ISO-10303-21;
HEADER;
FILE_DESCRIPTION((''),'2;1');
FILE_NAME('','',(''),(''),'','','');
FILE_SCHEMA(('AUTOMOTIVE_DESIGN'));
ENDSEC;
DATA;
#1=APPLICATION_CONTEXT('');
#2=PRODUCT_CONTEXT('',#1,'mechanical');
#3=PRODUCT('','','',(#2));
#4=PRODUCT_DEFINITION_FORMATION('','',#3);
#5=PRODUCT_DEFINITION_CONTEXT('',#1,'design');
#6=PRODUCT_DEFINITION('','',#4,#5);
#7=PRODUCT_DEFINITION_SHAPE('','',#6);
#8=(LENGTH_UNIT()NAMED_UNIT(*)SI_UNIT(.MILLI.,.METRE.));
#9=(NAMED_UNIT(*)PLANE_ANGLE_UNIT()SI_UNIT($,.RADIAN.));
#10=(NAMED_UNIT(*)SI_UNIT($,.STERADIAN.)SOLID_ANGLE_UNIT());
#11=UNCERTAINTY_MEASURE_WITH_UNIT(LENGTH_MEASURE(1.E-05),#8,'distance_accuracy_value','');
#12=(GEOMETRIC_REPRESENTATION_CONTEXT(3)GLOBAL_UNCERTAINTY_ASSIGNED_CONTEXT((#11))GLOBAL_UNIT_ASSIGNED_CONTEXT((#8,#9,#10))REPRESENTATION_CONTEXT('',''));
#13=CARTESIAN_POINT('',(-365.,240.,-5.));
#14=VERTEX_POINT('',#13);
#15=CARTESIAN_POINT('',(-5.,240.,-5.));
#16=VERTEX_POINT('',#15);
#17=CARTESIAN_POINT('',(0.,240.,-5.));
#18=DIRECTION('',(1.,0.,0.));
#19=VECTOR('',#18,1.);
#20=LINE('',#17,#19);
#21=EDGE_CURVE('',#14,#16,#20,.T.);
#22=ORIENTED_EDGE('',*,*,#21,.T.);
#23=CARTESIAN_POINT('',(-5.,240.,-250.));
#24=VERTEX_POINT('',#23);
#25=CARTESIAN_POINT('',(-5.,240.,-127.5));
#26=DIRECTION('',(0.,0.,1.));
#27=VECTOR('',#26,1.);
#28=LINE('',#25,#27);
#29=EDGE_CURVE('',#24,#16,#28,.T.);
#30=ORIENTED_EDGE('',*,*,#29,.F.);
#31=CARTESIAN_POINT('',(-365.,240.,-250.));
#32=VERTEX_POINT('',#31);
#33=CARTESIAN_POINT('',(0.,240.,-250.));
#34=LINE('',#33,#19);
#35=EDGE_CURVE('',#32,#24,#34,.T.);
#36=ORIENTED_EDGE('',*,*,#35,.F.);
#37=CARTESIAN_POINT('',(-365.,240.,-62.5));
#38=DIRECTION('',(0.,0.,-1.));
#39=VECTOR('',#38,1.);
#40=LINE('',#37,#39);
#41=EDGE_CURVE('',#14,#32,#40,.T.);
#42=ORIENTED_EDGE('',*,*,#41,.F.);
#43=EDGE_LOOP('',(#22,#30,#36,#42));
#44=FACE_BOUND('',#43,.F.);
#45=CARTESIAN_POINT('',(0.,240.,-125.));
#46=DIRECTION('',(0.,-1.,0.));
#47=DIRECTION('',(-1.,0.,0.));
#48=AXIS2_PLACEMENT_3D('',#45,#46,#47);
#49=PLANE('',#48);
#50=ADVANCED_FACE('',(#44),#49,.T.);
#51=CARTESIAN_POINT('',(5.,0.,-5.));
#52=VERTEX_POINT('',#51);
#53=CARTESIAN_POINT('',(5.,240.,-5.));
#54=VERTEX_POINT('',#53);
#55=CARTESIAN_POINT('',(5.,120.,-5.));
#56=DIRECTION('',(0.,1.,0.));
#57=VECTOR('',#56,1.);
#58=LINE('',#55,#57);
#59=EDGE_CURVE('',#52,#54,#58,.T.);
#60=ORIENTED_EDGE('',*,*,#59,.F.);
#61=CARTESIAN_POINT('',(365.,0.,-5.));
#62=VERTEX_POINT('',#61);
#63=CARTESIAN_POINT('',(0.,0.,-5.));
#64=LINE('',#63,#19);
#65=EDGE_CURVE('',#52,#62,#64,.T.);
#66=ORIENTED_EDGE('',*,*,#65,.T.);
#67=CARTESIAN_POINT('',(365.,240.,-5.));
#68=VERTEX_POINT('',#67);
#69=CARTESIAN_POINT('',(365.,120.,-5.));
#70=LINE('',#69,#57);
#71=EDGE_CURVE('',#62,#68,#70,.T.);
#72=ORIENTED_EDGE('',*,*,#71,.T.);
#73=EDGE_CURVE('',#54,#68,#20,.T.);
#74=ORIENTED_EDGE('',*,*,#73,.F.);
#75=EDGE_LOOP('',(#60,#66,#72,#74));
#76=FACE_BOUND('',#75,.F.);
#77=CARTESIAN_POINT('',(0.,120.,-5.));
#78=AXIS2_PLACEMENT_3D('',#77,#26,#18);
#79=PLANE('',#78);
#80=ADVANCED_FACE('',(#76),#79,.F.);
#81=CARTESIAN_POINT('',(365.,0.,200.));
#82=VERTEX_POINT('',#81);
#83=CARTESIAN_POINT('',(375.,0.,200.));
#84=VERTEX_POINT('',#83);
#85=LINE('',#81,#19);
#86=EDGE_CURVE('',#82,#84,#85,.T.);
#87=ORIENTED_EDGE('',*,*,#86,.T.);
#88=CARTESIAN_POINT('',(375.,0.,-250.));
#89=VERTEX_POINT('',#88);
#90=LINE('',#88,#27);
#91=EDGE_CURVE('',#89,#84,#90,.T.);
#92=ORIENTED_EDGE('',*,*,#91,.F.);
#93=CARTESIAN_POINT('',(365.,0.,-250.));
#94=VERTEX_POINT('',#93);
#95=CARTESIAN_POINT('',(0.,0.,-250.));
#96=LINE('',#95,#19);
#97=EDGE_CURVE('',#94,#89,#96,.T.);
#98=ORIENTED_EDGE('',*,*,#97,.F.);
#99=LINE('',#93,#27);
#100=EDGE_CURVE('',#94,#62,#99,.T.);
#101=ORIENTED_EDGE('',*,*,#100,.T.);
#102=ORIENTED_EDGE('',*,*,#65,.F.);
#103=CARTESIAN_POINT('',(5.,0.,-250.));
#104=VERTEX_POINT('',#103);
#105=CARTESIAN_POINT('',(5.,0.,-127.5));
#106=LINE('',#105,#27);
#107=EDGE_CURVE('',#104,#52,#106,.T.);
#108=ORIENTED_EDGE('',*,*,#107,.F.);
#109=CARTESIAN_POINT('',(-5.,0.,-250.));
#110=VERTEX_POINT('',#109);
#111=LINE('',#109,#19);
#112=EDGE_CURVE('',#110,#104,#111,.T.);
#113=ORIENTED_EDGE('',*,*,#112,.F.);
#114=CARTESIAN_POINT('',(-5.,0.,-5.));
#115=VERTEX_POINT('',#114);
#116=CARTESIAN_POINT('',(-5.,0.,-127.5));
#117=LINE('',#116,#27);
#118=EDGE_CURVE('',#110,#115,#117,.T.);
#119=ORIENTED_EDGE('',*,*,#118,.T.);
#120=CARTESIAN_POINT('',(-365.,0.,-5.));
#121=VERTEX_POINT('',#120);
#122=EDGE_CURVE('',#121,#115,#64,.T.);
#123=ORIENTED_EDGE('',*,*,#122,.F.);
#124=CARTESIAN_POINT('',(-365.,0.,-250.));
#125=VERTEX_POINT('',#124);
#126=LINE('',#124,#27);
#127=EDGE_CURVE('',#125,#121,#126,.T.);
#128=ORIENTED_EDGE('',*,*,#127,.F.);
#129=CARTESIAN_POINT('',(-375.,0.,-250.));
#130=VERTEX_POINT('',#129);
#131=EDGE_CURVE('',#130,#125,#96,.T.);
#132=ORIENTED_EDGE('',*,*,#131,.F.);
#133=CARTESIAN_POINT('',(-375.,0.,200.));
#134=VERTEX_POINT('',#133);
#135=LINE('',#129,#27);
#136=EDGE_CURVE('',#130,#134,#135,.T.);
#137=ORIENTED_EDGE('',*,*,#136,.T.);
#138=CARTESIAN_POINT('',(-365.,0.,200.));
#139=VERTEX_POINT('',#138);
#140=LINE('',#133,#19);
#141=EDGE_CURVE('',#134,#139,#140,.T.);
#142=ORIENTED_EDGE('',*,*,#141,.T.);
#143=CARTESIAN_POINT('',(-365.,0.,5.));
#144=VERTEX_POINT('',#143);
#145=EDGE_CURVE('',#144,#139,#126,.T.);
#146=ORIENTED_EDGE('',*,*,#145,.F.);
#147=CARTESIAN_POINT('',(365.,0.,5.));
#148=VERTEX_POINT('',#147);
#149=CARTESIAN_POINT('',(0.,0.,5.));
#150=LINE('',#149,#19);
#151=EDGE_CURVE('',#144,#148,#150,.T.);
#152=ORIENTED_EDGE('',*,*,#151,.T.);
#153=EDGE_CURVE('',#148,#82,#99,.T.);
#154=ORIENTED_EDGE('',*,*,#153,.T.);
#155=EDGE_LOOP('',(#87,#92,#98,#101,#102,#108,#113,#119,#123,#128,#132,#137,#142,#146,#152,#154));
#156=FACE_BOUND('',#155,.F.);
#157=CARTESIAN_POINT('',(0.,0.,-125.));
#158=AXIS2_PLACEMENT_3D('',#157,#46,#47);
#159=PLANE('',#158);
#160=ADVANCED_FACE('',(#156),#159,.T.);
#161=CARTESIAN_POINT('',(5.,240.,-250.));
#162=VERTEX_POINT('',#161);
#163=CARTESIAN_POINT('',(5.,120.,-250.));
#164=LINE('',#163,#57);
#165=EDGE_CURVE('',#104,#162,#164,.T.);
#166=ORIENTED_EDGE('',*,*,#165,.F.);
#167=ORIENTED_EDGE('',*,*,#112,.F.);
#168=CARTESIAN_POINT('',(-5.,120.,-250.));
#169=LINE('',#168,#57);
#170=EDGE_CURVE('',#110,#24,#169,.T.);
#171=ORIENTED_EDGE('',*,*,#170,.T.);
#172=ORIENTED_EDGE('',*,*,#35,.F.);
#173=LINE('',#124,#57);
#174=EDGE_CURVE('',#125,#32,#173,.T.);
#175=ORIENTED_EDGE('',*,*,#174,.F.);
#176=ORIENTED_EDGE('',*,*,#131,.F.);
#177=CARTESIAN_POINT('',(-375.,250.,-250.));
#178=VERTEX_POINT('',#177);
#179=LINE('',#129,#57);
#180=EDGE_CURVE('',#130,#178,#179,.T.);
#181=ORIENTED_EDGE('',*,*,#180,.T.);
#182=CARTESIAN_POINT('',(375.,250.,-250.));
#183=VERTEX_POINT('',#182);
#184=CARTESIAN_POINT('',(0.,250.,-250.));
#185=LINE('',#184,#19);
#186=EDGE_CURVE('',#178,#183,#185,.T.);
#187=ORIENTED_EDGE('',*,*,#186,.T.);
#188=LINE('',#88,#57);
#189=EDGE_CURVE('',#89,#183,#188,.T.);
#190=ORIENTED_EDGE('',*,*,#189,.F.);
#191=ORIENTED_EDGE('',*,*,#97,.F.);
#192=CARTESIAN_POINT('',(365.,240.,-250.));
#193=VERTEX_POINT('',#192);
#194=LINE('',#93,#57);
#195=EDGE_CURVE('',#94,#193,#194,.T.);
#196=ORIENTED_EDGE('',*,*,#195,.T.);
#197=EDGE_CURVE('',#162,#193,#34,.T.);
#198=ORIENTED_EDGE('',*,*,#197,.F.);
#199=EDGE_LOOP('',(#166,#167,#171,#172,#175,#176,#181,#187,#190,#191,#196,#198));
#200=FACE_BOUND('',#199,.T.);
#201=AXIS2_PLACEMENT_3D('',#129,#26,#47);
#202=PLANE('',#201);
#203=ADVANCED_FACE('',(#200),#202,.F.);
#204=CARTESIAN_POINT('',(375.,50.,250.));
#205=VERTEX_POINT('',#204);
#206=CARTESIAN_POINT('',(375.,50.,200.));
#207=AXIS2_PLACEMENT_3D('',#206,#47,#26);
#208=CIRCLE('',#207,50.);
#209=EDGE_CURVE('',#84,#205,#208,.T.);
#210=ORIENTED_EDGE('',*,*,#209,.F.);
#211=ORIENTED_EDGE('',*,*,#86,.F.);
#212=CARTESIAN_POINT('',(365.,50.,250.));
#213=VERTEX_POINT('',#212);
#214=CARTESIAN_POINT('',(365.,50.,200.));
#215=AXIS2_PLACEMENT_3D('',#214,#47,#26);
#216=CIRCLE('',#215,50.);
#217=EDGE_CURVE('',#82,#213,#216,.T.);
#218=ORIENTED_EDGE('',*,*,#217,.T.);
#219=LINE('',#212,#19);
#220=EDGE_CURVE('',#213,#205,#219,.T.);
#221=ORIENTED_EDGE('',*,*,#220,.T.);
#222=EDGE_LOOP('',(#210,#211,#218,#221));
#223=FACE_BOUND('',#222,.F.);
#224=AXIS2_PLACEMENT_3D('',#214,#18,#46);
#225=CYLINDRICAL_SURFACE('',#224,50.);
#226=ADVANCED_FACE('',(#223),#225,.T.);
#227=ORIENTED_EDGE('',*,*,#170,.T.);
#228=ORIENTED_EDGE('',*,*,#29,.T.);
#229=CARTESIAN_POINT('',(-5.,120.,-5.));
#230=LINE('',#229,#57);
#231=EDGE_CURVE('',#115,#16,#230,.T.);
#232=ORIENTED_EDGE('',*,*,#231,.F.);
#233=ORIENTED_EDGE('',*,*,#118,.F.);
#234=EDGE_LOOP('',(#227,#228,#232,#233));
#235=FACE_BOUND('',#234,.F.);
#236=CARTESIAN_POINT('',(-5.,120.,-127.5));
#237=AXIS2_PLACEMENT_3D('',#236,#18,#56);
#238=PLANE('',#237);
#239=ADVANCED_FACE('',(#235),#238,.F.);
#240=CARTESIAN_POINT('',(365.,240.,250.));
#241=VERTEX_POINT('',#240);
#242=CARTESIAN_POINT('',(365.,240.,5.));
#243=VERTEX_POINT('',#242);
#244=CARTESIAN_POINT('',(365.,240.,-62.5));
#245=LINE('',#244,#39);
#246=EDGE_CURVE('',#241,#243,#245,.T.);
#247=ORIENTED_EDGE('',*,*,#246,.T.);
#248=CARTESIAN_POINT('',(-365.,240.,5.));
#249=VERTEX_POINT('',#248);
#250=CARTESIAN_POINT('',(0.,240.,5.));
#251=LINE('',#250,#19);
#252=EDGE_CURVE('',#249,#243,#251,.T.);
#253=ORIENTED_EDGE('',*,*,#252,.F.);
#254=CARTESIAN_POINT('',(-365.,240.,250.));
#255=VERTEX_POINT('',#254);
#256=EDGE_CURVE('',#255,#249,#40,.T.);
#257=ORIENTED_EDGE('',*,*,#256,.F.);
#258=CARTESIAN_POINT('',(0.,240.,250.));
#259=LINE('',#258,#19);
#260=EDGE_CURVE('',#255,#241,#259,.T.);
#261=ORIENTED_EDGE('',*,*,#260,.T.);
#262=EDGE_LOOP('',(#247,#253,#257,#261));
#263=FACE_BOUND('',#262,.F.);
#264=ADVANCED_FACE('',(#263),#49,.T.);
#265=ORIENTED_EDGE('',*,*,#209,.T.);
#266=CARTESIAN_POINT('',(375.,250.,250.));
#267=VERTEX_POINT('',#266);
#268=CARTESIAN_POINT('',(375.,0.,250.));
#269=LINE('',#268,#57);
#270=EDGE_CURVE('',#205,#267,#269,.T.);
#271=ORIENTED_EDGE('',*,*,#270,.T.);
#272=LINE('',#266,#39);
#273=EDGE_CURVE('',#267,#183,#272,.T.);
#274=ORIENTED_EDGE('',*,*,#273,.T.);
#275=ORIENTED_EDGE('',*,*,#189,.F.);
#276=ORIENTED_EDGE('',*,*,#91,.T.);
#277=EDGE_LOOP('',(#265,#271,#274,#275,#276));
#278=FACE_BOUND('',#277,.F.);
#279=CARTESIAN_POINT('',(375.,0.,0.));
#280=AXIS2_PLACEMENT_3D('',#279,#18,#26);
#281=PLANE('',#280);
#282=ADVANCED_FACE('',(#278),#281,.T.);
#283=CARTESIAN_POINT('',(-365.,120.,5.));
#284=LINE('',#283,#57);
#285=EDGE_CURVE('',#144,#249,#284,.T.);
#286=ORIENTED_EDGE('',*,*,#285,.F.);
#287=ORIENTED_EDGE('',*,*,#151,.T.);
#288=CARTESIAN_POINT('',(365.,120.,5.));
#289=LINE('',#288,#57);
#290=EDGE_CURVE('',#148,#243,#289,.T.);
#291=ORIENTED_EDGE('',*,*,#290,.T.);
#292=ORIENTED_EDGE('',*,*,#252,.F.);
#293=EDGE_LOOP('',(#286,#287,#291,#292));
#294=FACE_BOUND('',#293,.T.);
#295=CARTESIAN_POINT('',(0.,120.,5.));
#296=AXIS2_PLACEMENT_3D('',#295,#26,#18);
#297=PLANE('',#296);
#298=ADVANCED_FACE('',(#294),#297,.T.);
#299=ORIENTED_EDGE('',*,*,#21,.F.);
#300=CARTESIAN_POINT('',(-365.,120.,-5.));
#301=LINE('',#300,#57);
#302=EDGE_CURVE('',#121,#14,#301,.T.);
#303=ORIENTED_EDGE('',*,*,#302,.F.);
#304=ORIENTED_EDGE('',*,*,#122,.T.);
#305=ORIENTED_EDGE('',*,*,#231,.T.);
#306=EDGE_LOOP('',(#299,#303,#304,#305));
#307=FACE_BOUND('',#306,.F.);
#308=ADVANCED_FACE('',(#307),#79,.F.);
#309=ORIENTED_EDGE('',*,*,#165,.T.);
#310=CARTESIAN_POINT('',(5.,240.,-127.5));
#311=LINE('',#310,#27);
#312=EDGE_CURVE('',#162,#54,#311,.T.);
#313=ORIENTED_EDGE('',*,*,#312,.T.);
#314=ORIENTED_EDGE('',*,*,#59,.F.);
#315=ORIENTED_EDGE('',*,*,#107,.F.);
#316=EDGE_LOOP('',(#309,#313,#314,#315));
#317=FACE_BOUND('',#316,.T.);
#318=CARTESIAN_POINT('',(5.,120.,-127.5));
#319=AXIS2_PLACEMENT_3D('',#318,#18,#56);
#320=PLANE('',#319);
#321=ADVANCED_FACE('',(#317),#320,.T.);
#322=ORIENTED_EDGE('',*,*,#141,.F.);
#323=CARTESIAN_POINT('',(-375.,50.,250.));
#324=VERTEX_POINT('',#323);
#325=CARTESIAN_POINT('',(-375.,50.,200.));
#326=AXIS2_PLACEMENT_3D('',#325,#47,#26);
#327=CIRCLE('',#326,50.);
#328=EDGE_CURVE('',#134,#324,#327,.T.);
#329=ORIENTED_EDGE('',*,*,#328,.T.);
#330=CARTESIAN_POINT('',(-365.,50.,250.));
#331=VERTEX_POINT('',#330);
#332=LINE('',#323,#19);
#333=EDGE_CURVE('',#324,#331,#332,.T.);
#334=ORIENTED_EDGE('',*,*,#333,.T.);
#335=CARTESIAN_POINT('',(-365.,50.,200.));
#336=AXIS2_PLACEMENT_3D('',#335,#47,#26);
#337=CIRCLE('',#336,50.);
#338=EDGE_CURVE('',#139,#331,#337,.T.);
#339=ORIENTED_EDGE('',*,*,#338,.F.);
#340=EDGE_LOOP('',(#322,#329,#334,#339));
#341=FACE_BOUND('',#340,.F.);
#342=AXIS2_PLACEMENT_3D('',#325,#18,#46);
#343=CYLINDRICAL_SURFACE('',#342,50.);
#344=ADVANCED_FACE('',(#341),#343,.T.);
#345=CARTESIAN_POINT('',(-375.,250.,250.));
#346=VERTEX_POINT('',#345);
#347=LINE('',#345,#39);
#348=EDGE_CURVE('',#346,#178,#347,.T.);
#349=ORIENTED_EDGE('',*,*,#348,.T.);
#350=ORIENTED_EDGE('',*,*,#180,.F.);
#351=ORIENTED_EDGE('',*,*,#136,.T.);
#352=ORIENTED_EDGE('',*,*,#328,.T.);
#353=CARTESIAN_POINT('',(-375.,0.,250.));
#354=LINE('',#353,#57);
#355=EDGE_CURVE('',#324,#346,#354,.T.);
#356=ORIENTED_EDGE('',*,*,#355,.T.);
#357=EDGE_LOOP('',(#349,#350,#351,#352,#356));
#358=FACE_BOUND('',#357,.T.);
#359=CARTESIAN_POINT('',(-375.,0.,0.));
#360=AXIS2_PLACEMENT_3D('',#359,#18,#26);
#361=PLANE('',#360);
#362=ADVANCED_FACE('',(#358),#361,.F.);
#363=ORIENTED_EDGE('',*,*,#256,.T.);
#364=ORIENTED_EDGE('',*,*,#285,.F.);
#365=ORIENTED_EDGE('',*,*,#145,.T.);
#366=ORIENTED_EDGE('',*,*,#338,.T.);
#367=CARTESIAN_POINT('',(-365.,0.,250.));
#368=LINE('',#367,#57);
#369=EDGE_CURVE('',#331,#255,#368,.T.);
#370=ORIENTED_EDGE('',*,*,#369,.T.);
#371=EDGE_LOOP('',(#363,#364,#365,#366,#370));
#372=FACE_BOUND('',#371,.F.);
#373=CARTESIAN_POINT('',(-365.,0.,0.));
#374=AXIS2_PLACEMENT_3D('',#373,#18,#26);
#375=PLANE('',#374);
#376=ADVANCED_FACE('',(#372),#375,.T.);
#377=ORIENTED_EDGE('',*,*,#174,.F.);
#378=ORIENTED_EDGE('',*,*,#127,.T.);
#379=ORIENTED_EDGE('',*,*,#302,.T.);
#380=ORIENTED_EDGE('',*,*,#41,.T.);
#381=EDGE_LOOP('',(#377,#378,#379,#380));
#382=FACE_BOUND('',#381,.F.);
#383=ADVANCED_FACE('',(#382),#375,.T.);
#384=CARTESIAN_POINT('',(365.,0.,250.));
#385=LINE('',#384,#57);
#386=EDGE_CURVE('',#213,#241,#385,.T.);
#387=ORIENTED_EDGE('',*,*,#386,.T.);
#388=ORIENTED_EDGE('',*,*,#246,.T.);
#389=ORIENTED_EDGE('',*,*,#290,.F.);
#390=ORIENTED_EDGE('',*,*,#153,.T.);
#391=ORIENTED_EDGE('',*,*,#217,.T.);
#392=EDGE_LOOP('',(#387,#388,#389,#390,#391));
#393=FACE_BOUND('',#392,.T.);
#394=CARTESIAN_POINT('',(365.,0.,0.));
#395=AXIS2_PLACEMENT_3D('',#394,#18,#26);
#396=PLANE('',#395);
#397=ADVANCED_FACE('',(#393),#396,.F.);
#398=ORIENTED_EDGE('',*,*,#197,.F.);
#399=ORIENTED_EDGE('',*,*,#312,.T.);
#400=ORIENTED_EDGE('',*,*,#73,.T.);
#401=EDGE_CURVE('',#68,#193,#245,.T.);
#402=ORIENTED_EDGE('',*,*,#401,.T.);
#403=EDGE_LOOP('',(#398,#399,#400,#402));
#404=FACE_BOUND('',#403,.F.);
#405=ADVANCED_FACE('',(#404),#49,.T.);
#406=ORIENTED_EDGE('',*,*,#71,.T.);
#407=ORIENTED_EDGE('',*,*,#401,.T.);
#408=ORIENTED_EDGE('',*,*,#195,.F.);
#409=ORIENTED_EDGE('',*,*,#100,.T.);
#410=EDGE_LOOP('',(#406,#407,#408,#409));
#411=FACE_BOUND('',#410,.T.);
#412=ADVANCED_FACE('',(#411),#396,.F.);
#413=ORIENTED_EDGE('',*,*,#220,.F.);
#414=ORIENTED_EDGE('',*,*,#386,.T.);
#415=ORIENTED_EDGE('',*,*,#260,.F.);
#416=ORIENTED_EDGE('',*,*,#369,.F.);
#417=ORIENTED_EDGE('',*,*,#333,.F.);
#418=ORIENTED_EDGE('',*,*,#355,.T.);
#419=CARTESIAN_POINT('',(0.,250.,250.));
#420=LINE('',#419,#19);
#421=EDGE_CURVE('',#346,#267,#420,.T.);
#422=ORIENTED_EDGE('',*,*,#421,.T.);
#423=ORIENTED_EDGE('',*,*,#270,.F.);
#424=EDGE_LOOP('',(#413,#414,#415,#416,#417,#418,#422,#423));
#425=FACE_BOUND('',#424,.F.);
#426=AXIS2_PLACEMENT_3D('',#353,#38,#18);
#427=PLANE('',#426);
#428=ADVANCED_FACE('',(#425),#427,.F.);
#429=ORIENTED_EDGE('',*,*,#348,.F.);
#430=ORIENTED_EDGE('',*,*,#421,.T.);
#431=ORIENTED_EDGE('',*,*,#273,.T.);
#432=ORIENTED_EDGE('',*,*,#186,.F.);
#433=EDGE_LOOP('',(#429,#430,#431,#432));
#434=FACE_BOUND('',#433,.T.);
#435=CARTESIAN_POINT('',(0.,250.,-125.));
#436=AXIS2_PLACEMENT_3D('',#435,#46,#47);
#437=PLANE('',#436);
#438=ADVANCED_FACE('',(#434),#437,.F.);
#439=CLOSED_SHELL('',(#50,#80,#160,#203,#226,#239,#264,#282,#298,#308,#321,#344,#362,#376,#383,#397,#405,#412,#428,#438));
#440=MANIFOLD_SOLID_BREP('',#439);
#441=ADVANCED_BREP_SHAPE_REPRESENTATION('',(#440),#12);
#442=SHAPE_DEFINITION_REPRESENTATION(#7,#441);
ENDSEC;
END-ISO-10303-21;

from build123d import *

# Parameters (mm, degrees)
F0_W     = 750
F0_H     = 250
F1_DEPTH = 250
F3_T     = -10
F4_W     = 730
F4_H     = 240
F5_DEPTH = 5
F6_R     = 50
F8_W     = 240
F8_H     = 245
F9_DEPTH = 5


# Not quite as in the source:
# - a feature of the source that left no trace in its solid (it failed there, or was rolled back) is left out


with BuildPart() as f1:
    # F0 (on Front) → F1 (new body)
    with BuildSketch(Plane.XZ):
        with Locations((0, 125)):
            Rectangle(F0_W, F0_H)
    extrude(amount=-F1_DEPTH)

    # F2: F1 across plane


with BuildPart() as f1_1:
    add(f1.part)
    add(f1.part.mirror(Plane.XY))

    # F3
    f3_openings = [f1_1.faces().sort_by_distance(p)[0] for p in [
        (0, 0, 0),
        (0, 125, 250),
        (0, 125, -250),
    ]]
    offset(amount=F3_T, openings=f3_openings)

    # F4 (on Top) → F5 (join, symmetric)
    with BuildSketch(Plane.XY):
        with Locations((0, 120)):
            Rectangle(F4_W, F4_H)
    extrude(amount=F5_DEPTH, both=True)

    # F6
    f6_edges = [f1_1.edges().sort_by_distance(p)[0] for p in [
        (-370, 0, 250),
        (370, 0, 250),
    ]]
    fillet(f6_edges, radius=F6_R)

    # F8 (on Right) → F9 (join, symmetric)
    with BuildSketch(Plane.YZ):
        with Locations((120, -127.5)):
            Rectangle(F8_W, F8_H)
    extrude(amount=F9_DEPTH, both=True)


solid = f1_1.part
